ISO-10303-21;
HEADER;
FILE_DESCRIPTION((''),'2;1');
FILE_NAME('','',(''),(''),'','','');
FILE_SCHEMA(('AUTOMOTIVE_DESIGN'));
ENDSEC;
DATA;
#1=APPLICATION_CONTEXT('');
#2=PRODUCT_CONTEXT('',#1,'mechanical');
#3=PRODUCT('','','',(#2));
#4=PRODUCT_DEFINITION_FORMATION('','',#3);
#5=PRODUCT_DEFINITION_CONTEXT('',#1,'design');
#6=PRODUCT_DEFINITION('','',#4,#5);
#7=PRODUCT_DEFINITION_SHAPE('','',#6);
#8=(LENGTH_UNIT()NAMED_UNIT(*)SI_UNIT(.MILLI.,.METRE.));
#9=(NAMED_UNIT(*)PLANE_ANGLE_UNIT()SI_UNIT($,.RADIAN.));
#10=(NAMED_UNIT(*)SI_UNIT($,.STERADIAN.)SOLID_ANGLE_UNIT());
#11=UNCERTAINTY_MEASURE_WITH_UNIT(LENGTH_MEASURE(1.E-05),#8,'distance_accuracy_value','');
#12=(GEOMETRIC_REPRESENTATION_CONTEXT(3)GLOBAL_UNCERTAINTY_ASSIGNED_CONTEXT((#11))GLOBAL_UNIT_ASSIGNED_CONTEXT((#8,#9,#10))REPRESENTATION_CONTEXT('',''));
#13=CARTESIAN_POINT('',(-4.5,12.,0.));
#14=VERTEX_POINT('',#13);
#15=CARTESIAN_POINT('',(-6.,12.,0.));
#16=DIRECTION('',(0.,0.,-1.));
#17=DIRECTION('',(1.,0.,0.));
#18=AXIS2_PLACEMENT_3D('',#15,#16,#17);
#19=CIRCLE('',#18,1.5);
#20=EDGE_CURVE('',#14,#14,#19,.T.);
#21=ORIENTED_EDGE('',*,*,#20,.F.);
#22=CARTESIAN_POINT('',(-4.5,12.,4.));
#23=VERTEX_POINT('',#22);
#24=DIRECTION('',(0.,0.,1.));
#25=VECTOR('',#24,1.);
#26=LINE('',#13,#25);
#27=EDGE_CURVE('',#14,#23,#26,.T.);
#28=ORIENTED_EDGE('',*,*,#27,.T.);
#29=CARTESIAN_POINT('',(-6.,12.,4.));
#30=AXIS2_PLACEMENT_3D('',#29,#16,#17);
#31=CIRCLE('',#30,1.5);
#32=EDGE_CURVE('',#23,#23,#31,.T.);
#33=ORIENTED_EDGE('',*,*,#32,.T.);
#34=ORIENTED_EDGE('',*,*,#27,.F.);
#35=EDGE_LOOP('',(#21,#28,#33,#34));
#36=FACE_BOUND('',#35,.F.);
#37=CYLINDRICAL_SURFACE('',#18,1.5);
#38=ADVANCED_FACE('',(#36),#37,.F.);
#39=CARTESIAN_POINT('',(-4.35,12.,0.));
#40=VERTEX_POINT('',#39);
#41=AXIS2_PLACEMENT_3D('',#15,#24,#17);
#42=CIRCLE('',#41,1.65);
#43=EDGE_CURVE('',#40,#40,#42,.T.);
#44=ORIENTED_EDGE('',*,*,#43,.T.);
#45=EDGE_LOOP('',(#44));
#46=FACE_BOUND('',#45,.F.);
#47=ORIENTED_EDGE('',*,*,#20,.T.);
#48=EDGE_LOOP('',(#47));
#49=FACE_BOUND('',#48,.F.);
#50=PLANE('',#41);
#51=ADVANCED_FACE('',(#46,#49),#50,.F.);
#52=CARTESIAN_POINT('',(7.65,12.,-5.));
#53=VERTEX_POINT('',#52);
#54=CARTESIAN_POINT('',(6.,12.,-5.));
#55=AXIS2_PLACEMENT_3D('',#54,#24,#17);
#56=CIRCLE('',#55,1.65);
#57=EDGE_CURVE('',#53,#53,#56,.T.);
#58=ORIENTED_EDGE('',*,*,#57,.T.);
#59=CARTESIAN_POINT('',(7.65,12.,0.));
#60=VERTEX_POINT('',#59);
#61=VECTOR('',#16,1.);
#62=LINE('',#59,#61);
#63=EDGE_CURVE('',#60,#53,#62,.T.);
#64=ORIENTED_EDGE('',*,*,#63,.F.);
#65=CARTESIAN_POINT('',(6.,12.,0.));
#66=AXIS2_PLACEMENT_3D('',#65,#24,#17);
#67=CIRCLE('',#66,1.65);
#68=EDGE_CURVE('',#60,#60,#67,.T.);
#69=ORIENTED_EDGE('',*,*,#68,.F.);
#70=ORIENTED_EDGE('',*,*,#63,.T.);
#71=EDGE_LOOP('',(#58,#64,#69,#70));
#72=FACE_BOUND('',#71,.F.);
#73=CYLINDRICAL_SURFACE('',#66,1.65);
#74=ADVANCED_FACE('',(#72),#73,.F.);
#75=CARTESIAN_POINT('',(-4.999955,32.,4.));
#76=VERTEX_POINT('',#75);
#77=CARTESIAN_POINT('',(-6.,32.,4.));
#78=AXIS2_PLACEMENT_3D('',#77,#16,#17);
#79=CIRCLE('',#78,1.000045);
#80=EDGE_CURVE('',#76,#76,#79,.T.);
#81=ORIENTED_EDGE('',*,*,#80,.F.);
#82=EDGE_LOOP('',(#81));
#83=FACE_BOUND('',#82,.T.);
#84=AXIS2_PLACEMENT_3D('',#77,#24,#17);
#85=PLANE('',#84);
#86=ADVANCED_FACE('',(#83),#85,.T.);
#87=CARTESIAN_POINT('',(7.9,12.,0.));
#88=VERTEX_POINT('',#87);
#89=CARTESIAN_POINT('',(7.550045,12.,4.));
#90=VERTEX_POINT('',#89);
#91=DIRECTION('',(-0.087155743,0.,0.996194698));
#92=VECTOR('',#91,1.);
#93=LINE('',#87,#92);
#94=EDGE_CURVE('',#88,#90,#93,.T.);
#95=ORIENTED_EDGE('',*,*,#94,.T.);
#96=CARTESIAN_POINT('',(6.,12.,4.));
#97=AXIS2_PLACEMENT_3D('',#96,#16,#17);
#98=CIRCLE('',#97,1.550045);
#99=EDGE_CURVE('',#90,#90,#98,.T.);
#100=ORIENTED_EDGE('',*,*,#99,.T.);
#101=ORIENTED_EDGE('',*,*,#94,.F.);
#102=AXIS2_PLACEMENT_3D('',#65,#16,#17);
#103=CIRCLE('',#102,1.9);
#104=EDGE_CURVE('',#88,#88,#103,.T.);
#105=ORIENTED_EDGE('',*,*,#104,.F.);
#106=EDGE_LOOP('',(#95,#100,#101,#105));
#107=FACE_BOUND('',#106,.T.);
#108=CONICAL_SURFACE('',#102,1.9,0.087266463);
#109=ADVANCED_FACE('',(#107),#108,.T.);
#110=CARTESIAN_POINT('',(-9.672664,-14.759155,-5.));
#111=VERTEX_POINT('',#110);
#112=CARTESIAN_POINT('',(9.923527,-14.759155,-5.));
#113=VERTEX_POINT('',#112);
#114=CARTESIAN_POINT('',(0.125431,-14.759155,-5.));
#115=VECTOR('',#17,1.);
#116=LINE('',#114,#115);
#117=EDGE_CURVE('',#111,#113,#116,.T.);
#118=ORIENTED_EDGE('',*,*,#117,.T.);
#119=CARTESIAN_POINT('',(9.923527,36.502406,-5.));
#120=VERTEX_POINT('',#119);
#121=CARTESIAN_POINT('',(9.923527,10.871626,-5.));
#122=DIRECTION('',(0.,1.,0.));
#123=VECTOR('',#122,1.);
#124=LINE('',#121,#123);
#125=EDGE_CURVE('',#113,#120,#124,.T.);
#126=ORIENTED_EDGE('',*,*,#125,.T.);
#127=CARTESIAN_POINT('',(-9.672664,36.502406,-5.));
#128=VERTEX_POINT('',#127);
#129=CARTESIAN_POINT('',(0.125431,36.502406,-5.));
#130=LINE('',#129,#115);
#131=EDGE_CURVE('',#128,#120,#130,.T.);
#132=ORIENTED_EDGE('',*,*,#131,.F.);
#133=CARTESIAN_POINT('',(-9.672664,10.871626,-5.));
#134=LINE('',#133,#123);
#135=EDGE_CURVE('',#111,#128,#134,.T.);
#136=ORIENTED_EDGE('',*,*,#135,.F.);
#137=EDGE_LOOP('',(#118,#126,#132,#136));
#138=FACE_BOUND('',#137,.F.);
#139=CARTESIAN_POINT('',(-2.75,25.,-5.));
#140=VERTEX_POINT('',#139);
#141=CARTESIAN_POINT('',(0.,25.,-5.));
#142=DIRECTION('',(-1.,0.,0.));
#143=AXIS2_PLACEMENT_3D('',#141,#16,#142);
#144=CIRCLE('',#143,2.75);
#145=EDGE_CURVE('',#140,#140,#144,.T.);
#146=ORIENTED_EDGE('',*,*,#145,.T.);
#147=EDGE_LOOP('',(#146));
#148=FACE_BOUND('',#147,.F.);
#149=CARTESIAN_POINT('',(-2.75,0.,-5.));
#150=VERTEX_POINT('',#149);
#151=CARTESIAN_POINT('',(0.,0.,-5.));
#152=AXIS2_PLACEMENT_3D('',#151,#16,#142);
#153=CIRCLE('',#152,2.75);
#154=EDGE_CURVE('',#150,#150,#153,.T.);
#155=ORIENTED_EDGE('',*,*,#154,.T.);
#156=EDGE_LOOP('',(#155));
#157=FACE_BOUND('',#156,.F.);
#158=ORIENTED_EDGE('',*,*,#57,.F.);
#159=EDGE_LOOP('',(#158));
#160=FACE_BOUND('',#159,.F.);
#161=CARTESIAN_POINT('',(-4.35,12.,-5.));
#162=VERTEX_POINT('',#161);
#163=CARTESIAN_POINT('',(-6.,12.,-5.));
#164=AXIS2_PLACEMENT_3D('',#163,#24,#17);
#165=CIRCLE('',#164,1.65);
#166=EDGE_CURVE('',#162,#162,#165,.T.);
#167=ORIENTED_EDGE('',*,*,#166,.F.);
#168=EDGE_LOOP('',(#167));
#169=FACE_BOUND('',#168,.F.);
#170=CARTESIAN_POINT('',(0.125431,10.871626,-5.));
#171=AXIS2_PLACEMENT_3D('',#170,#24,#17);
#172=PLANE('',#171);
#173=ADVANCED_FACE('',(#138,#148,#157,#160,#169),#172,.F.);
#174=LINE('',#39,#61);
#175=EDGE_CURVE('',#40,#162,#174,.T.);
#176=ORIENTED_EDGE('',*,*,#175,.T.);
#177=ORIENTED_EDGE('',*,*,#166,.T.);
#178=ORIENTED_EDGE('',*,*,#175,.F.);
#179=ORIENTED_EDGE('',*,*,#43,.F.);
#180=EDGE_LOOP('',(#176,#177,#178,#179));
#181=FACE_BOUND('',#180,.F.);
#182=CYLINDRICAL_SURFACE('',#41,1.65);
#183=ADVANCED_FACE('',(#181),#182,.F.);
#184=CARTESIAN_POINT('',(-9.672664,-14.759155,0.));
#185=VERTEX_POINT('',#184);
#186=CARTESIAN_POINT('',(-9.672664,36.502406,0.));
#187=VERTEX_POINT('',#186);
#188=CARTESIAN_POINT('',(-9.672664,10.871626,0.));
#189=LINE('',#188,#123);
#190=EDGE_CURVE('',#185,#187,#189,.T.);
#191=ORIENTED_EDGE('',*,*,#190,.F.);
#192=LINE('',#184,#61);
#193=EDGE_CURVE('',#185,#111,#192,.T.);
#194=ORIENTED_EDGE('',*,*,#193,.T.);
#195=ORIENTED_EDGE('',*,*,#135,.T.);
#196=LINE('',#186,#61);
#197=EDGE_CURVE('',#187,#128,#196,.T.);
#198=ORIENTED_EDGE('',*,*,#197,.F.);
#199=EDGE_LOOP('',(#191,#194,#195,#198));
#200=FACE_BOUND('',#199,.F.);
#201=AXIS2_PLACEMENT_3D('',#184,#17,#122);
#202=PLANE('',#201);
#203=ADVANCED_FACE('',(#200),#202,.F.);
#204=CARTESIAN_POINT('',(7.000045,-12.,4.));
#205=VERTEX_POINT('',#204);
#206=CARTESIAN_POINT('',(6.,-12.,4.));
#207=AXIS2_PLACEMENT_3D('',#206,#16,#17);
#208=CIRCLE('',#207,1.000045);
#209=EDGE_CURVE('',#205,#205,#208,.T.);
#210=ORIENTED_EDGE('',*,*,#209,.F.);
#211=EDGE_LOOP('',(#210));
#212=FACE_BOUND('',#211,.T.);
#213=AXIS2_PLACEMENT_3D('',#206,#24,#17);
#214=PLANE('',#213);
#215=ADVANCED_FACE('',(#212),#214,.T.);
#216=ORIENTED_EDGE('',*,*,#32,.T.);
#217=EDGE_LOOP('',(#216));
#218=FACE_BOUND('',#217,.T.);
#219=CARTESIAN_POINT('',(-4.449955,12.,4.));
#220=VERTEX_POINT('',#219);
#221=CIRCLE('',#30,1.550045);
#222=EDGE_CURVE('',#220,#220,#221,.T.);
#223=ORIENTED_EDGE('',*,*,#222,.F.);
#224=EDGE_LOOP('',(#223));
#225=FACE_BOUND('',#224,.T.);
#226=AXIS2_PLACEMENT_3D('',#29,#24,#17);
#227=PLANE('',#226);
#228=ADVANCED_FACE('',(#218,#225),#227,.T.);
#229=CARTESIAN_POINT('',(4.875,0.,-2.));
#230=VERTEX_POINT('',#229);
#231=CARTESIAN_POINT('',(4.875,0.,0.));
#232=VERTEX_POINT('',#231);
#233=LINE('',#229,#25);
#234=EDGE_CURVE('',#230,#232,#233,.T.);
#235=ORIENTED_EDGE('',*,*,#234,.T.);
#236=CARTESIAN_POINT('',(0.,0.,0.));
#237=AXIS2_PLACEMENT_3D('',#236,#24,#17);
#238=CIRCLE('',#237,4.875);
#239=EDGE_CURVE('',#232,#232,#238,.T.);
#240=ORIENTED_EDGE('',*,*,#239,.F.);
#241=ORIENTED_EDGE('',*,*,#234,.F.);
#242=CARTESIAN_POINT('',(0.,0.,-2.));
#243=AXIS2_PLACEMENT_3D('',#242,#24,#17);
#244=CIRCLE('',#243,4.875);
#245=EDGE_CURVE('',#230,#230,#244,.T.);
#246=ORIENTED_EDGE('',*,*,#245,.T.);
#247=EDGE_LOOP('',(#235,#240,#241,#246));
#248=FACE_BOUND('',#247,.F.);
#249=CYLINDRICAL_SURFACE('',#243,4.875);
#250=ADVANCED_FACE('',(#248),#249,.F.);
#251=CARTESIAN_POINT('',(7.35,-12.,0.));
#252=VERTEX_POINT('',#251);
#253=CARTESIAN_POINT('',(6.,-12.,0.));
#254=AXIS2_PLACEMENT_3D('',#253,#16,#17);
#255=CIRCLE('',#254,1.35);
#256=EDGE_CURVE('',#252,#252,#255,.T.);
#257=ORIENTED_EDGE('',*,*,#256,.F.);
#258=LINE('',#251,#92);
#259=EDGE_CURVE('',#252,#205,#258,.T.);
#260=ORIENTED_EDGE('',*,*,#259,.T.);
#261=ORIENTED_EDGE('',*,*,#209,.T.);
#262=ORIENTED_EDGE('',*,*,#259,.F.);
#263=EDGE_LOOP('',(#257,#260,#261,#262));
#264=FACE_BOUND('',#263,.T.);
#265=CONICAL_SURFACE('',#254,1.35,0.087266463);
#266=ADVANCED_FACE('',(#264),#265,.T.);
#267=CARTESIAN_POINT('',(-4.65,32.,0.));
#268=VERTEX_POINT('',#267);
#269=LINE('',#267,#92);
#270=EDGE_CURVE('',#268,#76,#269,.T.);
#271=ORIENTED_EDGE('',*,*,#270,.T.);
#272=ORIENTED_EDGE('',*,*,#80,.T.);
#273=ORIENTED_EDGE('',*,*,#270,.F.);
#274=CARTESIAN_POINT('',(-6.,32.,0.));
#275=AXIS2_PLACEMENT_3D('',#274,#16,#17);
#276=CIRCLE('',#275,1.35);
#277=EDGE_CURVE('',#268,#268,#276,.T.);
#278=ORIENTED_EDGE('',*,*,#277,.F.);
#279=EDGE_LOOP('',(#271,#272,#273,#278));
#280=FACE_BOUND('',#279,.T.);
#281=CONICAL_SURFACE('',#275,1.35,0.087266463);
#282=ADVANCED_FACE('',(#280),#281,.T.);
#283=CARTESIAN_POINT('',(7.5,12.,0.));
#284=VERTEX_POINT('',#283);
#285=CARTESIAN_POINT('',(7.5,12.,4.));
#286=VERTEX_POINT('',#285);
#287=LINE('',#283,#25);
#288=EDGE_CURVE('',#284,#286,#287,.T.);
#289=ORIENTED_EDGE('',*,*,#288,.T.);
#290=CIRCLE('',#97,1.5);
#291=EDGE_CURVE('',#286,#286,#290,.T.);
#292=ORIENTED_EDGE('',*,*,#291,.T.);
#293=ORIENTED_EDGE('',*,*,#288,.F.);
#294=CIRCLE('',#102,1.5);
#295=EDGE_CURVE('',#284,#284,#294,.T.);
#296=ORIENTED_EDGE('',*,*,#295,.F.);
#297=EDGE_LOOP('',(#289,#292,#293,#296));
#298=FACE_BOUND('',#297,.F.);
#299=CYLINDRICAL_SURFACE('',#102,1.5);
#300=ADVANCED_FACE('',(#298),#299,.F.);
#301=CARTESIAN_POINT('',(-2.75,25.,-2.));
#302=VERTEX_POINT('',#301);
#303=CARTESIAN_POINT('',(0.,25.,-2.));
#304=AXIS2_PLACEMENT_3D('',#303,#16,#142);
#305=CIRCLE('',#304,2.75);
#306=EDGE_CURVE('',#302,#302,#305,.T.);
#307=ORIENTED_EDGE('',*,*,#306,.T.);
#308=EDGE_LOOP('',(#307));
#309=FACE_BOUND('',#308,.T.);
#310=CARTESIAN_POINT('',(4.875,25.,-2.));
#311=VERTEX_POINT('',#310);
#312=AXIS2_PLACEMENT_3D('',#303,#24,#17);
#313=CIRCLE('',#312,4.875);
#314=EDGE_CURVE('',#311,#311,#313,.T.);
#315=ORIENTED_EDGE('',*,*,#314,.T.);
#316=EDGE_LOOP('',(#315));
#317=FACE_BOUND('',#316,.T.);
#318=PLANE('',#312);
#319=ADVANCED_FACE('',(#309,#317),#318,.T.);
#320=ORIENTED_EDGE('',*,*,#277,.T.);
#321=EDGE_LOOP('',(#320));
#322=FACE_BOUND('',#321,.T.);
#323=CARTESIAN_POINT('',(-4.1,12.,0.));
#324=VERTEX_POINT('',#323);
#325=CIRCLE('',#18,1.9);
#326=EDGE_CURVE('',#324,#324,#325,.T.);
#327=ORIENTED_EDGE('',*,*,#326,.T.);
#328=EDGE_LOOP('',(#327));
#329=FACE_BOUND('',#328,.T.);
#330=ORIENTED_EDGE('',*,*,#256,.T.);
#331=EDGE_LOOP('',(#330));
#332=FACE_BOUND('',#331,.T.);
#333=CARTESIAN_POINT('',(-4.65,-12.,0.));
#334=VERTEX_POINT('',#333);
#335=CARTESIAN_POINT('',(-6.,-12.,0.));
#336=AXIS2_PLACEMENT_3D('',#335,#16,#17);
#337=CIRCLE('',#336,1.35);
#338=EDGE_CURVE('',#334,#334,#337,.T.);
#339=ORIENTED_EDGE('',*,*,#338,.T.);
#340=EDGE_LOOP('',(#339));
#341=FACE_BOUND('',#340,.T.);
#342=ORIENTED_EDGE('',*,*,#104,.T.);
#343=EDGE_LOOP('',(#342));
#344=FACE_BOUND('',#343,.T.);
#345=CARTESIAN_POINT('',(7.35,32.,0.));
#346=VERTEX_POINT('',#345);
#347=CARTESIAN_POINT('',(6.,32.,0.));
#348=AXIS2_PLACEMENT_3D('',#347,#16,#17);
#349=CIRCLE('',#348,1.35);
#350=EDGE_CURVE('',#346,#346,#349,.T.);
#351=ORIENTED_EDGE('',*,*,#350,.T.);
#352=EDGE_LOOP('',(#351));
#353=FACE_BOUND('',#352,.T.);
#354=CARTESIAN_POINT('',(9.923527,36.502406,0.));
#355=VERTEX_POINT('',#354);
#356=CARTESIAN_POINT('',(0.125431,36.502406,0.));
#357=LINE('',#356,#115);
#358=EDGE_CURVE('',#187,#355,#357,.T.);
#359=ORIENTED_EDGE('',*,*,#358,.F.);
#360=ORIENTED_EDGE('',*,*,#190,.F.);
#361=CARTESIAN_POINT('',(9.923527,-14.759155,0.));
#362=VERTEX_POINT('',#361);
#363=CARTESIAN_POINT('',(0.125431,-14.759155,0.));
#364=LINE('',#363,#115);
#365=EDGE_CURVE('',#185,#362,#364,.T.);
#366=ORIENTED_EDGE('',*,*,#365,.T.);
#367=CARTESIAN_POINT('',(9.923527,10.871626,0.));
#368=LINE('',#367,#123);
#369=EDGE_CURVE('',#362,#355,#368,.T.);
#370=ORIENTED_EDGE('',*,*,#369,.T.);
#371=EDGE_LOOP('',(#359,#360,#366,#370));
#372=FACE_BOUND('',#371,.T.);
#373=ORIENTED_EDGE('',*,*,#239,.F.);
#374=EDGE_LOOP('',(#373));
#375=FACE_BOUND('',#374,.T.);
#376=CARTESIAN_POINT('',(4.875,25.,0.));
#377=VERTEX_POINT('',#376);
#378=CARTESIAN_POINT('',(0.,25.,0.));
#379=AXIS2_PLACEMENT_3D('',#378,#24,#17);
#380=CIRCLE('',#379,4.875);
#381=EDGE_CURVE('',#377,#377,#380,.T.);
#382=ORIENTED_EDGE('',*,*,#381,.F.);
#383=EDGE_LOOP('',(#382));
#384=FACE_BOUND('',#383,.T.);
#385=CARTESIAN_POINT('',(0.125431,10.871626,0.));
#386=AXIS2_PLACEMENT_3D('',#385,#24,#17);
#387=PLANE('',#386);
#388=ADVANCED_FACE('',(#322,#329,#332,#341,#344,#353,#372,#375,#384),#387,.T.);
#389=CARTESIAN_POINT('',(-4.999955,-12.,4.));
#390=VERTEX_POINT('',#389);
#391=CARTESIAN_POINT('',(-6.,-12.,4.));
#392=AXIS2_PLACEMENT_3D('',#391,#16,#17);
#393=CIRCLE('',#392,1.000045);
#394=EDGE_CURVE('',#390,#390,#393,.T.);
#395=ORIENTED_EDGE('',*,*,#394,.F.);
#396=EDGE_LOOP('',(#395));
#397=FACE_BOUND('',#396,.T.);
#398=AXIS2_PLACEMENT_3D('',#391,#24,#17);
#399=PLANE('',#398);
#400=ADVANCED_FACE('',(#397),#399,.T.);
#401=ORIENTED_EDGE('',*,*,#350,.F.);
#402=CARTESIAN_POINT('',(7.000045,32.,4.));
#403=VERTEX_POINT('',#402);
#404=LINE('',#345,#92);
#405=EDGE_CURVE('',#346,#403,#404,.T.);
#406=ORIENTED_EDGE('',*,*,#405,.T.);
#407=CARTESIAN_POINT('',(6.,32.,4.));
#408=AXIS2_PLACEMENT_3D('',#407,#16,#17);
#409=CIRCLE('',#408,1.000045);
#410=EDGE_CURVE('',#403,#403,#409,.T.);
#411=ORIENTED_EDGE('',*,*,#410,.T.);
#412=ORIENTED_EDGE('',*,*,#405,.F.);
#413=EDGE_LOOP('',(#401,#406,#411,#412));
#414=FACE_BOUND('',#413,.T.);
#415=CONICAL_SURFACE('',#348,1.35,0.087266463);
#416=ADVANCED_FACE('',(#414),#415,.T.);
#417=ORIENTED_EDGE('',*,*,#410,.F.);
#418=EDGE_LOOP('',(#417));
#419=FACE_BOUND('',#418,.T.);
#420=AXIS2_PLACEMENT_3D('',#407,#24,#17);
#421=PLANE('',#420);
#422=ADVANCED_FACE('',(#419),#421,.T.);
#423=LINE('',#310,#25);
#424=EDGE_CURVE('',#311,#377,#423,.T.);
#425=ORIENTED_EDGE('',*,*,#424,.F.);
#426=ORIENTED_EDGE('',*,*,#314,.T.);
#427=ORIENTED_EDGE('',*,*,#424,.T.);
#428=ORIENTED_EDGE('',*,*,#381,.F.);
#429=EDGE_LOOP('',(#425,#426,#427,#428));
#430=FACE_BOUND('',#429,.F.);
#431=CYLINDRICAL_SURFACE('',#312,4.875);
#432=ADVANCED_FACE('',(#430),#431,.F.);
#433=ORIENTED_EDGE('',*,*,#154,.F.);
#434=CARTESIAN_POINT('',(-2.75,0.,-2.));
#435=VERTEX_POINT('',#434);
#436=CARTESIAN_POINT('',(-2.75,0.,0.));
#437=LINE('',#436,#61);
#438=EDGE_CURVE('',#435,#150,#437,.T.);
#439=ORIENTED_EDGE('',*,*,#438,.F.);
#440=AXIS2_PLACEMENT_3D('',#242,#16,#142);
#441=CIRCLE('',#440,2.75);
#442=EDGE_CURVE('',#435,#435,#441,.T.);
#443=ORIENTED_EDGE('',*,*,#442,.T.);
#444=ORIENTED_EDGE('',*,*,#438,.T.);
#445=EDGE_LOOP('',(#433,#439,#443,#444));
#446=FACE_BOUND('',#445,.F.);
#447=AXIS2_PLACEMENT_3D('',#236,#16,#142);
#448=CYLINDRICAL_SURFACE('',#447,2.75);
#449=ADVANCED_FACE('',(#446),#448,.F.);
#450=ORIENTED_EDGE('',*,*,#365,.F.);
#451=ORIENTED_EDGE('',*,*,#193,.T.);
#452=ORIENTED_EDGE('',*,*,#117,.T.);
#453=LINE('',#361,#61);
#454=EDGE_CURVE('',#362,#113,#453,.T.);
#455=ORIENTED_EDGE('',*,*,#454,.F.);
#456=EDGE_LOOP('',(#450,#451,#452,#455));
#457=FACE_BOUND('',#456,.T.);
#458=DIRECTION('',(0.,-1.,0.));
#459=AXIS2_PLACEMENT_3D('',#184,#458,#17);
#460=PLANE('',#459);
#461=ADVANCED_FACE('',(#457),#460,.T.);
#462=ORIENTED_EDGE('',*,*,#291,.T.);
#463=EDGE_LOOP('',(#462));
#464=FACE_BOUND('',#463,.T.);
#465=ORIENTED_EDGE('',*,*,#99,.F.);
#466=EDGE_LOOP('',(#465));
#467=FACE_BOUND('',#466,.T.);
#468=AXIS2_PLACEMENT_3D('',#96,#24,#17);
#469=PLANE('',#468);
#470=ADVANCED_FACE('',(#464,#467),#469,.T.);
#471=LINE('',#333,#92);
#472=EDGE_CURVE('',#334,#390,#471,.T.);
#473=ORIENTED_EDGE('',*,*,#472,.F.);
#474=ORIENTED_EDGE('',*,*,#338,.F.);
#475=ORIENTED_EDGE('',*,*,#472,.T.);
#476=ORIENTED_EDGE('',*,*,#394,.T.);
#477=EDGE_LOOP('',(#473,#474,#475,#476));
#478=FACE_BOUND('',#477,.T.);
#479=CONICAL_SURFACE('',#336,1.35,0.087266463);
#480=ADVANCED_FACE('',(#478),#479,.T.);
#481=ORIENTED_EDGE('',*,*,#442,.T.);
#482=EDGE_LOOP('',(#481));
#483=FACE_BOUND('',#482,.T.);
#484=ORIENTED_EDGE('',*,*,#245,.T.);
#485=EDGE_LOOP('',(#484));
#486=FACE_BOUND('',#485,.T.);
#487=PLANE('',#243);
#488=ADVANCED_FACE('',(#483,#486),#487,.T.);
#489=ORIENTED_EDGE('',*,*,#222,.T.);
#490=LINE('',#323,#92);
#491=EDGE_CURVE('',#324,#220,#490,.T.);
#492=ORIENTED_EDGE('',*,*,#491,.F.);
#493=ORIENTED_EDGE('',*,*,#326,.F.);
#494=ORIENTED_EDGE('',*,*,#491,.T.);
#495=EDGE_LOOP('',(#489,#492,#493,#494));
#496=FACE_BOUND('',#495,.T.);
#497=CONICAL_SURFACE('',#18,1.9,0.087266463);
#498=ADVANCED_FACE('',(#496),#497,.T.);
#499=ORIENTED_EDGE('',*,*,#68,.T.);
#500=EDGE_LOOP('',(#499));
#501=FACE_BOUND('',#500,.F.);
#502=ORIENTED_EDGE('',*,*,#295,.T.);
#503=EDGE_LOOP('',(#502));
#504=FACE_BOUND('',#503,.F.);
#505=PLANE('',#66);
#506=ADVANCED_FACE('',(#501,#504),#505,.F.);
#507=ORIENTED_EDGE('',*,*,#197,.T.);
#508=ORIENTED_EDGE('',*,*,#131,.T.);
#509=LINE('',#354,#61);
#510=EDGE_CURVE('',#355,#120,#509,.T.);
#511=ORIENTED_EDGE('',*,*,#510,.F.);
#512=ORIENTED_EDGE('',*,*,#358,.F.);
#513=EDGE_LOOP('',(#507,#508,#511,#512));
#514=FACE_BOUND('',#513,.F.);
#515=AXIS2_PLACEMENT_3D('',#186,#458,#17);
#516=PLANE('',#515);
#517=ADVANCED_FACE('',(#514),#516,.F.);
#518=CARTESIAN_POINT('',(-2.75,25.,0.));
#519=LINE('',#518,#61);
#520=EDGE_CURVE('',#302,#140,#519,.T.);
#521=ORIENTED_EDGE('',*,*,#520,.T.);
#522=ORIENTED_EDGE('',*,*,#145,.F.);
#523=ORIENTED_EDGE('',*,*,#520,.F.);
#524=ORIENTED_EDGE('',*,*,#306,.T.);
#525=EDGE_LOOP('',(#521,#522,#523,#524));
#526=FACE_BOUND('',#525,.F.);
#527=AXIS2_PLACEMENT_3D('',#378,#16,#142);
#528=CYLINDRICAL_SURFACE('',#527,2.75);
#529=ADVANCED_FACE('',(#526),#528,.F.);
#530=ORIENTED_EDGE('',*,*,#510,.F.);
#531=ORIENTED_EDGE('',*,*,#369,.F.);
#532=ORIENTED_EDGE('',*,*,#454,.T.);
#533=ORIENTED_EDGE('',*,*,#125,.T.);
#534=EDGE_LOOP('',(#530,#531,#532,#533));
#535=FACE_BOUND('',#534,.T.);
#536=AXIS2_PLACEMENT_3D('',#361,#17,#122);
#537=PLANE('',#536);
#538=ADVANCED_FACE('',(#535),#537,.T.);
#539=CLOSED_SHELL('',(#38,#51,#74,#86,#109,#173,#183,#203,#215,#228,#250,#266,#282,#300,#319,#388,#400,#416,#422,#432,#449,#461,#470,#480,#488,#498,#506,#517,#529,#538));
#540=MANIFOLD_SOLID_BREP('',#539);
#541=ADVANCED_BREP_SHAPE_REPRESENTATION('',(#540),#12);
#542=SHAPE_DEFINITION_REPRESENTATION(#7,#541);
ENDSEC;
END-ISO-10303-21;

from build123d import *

# Parameters (mm, degrees)
F1_W           = 19.5961911231
F1_H           = 51.2615609914
F2_DEPTH       = 5
F3_R           = 1.35
F3_R_2         = 1.9
F4_DEPTH       = 4
F4_TAPER       = 5
F5_D           = 3
F5_DEPTH       = 25
F5_TIP         = 0.9012909285
F6_D           = 3.3
F6_DEPTH       = 25
F6_TIP         = 0.9914200214
F8_D           = 5.5
F8_DEPTH       = 25
F8_CBORE_D     = 9.75
F8_CBORE_DEPTH = 2
F8_TIP         = 1.6523667023


# Not quite as in the source:
# - a feature names something its author has since deleted; it is built from what else it names


with BuildPart() as f2:
    # F1 (on Top) → F2 (new body)
    with BuildSketch(Plane.XY):
        with Locations((0.1254314557, 10.8716255054)):
            Rectangle(F1_W, F1_H)
    extrude(amount=-F2_DEPTH)

    # F3 (on face) → F4 (join)
    with BuildSketch(Plane.XY):
        with Locations((-6, 32)):
            Circle(F3_R)
        with Locations((6, 32)):
            Circle(F3_R)
        with Locations((6, 12)):
            Circle(F3_R_2)
        with Locations((-6, 12)):
            Circle(F3_R_2)
        with Locations((6, -12)):
            Circle(F3_R)
        with Locations((-6, -12)):
            Circle(F3_R)
    extrude(amount=F4_DEPTH, taper=F4_TAPER)

    # F5 (one way)
    with BuildSketch(Plane(origin=(0, 0, 0), x_dir=(1, 0, 0), z_dir=(0, 0, -1))):
        with Locations((-6, -12), (6, -12)):
            Circle(F5_D / 2)
    extrude(amount=-F5_DEPTH, mode=Mode.SUBTRACT)
    with Locations(Plane(origin=(0, 0, 0), x_dir=(1, 0, 0), z_dir=(0, 0, -1))):
        with Locations((-6, -12), (6, -12)):
            with Locations((0, 0, -(F5_DEPTH + F5_TIP / 2))):  # 118° drill point
                Cone(0, F5_D / 2, F5_TIP, mode=Mode.SUBTRACT)

    # F6 (one way)
    with BuildSketch(Plane.XY):
        with Locations((6, 12), (-6, 12)):
            Circle(F6_D / 2)
    extrude(amount=-F6_DEPTH, mode=Mode.SUBTRACT)
    with Locations(Plane.XY):
        with Locations((6, 12), (-6, 12)):
            with Locations((0, 0, -(F6_DEPTH + F6_TIP / 2))):  # 118° drill point
                Cone(0, F6_D / 2, F6_TIP, mode=Mode.SUBTRACT)

    # F8
    with Locations(Plane.XY):
        with Locations((0, 0), (0, 25)):
            CounterBoreHole(F8_D / 2, F8_CBORE_D / 2, F8_CBORE_DEPTH, depth=F8_DEPTH)
            with Locations((0, 0, -(F8_DEPTH + F8_TIP / 2))):  # 118° drill point
                Cone(0, F8_D / 2, F8_TIP, mode=Mode.SUBTRACT)


solid = f2.part
